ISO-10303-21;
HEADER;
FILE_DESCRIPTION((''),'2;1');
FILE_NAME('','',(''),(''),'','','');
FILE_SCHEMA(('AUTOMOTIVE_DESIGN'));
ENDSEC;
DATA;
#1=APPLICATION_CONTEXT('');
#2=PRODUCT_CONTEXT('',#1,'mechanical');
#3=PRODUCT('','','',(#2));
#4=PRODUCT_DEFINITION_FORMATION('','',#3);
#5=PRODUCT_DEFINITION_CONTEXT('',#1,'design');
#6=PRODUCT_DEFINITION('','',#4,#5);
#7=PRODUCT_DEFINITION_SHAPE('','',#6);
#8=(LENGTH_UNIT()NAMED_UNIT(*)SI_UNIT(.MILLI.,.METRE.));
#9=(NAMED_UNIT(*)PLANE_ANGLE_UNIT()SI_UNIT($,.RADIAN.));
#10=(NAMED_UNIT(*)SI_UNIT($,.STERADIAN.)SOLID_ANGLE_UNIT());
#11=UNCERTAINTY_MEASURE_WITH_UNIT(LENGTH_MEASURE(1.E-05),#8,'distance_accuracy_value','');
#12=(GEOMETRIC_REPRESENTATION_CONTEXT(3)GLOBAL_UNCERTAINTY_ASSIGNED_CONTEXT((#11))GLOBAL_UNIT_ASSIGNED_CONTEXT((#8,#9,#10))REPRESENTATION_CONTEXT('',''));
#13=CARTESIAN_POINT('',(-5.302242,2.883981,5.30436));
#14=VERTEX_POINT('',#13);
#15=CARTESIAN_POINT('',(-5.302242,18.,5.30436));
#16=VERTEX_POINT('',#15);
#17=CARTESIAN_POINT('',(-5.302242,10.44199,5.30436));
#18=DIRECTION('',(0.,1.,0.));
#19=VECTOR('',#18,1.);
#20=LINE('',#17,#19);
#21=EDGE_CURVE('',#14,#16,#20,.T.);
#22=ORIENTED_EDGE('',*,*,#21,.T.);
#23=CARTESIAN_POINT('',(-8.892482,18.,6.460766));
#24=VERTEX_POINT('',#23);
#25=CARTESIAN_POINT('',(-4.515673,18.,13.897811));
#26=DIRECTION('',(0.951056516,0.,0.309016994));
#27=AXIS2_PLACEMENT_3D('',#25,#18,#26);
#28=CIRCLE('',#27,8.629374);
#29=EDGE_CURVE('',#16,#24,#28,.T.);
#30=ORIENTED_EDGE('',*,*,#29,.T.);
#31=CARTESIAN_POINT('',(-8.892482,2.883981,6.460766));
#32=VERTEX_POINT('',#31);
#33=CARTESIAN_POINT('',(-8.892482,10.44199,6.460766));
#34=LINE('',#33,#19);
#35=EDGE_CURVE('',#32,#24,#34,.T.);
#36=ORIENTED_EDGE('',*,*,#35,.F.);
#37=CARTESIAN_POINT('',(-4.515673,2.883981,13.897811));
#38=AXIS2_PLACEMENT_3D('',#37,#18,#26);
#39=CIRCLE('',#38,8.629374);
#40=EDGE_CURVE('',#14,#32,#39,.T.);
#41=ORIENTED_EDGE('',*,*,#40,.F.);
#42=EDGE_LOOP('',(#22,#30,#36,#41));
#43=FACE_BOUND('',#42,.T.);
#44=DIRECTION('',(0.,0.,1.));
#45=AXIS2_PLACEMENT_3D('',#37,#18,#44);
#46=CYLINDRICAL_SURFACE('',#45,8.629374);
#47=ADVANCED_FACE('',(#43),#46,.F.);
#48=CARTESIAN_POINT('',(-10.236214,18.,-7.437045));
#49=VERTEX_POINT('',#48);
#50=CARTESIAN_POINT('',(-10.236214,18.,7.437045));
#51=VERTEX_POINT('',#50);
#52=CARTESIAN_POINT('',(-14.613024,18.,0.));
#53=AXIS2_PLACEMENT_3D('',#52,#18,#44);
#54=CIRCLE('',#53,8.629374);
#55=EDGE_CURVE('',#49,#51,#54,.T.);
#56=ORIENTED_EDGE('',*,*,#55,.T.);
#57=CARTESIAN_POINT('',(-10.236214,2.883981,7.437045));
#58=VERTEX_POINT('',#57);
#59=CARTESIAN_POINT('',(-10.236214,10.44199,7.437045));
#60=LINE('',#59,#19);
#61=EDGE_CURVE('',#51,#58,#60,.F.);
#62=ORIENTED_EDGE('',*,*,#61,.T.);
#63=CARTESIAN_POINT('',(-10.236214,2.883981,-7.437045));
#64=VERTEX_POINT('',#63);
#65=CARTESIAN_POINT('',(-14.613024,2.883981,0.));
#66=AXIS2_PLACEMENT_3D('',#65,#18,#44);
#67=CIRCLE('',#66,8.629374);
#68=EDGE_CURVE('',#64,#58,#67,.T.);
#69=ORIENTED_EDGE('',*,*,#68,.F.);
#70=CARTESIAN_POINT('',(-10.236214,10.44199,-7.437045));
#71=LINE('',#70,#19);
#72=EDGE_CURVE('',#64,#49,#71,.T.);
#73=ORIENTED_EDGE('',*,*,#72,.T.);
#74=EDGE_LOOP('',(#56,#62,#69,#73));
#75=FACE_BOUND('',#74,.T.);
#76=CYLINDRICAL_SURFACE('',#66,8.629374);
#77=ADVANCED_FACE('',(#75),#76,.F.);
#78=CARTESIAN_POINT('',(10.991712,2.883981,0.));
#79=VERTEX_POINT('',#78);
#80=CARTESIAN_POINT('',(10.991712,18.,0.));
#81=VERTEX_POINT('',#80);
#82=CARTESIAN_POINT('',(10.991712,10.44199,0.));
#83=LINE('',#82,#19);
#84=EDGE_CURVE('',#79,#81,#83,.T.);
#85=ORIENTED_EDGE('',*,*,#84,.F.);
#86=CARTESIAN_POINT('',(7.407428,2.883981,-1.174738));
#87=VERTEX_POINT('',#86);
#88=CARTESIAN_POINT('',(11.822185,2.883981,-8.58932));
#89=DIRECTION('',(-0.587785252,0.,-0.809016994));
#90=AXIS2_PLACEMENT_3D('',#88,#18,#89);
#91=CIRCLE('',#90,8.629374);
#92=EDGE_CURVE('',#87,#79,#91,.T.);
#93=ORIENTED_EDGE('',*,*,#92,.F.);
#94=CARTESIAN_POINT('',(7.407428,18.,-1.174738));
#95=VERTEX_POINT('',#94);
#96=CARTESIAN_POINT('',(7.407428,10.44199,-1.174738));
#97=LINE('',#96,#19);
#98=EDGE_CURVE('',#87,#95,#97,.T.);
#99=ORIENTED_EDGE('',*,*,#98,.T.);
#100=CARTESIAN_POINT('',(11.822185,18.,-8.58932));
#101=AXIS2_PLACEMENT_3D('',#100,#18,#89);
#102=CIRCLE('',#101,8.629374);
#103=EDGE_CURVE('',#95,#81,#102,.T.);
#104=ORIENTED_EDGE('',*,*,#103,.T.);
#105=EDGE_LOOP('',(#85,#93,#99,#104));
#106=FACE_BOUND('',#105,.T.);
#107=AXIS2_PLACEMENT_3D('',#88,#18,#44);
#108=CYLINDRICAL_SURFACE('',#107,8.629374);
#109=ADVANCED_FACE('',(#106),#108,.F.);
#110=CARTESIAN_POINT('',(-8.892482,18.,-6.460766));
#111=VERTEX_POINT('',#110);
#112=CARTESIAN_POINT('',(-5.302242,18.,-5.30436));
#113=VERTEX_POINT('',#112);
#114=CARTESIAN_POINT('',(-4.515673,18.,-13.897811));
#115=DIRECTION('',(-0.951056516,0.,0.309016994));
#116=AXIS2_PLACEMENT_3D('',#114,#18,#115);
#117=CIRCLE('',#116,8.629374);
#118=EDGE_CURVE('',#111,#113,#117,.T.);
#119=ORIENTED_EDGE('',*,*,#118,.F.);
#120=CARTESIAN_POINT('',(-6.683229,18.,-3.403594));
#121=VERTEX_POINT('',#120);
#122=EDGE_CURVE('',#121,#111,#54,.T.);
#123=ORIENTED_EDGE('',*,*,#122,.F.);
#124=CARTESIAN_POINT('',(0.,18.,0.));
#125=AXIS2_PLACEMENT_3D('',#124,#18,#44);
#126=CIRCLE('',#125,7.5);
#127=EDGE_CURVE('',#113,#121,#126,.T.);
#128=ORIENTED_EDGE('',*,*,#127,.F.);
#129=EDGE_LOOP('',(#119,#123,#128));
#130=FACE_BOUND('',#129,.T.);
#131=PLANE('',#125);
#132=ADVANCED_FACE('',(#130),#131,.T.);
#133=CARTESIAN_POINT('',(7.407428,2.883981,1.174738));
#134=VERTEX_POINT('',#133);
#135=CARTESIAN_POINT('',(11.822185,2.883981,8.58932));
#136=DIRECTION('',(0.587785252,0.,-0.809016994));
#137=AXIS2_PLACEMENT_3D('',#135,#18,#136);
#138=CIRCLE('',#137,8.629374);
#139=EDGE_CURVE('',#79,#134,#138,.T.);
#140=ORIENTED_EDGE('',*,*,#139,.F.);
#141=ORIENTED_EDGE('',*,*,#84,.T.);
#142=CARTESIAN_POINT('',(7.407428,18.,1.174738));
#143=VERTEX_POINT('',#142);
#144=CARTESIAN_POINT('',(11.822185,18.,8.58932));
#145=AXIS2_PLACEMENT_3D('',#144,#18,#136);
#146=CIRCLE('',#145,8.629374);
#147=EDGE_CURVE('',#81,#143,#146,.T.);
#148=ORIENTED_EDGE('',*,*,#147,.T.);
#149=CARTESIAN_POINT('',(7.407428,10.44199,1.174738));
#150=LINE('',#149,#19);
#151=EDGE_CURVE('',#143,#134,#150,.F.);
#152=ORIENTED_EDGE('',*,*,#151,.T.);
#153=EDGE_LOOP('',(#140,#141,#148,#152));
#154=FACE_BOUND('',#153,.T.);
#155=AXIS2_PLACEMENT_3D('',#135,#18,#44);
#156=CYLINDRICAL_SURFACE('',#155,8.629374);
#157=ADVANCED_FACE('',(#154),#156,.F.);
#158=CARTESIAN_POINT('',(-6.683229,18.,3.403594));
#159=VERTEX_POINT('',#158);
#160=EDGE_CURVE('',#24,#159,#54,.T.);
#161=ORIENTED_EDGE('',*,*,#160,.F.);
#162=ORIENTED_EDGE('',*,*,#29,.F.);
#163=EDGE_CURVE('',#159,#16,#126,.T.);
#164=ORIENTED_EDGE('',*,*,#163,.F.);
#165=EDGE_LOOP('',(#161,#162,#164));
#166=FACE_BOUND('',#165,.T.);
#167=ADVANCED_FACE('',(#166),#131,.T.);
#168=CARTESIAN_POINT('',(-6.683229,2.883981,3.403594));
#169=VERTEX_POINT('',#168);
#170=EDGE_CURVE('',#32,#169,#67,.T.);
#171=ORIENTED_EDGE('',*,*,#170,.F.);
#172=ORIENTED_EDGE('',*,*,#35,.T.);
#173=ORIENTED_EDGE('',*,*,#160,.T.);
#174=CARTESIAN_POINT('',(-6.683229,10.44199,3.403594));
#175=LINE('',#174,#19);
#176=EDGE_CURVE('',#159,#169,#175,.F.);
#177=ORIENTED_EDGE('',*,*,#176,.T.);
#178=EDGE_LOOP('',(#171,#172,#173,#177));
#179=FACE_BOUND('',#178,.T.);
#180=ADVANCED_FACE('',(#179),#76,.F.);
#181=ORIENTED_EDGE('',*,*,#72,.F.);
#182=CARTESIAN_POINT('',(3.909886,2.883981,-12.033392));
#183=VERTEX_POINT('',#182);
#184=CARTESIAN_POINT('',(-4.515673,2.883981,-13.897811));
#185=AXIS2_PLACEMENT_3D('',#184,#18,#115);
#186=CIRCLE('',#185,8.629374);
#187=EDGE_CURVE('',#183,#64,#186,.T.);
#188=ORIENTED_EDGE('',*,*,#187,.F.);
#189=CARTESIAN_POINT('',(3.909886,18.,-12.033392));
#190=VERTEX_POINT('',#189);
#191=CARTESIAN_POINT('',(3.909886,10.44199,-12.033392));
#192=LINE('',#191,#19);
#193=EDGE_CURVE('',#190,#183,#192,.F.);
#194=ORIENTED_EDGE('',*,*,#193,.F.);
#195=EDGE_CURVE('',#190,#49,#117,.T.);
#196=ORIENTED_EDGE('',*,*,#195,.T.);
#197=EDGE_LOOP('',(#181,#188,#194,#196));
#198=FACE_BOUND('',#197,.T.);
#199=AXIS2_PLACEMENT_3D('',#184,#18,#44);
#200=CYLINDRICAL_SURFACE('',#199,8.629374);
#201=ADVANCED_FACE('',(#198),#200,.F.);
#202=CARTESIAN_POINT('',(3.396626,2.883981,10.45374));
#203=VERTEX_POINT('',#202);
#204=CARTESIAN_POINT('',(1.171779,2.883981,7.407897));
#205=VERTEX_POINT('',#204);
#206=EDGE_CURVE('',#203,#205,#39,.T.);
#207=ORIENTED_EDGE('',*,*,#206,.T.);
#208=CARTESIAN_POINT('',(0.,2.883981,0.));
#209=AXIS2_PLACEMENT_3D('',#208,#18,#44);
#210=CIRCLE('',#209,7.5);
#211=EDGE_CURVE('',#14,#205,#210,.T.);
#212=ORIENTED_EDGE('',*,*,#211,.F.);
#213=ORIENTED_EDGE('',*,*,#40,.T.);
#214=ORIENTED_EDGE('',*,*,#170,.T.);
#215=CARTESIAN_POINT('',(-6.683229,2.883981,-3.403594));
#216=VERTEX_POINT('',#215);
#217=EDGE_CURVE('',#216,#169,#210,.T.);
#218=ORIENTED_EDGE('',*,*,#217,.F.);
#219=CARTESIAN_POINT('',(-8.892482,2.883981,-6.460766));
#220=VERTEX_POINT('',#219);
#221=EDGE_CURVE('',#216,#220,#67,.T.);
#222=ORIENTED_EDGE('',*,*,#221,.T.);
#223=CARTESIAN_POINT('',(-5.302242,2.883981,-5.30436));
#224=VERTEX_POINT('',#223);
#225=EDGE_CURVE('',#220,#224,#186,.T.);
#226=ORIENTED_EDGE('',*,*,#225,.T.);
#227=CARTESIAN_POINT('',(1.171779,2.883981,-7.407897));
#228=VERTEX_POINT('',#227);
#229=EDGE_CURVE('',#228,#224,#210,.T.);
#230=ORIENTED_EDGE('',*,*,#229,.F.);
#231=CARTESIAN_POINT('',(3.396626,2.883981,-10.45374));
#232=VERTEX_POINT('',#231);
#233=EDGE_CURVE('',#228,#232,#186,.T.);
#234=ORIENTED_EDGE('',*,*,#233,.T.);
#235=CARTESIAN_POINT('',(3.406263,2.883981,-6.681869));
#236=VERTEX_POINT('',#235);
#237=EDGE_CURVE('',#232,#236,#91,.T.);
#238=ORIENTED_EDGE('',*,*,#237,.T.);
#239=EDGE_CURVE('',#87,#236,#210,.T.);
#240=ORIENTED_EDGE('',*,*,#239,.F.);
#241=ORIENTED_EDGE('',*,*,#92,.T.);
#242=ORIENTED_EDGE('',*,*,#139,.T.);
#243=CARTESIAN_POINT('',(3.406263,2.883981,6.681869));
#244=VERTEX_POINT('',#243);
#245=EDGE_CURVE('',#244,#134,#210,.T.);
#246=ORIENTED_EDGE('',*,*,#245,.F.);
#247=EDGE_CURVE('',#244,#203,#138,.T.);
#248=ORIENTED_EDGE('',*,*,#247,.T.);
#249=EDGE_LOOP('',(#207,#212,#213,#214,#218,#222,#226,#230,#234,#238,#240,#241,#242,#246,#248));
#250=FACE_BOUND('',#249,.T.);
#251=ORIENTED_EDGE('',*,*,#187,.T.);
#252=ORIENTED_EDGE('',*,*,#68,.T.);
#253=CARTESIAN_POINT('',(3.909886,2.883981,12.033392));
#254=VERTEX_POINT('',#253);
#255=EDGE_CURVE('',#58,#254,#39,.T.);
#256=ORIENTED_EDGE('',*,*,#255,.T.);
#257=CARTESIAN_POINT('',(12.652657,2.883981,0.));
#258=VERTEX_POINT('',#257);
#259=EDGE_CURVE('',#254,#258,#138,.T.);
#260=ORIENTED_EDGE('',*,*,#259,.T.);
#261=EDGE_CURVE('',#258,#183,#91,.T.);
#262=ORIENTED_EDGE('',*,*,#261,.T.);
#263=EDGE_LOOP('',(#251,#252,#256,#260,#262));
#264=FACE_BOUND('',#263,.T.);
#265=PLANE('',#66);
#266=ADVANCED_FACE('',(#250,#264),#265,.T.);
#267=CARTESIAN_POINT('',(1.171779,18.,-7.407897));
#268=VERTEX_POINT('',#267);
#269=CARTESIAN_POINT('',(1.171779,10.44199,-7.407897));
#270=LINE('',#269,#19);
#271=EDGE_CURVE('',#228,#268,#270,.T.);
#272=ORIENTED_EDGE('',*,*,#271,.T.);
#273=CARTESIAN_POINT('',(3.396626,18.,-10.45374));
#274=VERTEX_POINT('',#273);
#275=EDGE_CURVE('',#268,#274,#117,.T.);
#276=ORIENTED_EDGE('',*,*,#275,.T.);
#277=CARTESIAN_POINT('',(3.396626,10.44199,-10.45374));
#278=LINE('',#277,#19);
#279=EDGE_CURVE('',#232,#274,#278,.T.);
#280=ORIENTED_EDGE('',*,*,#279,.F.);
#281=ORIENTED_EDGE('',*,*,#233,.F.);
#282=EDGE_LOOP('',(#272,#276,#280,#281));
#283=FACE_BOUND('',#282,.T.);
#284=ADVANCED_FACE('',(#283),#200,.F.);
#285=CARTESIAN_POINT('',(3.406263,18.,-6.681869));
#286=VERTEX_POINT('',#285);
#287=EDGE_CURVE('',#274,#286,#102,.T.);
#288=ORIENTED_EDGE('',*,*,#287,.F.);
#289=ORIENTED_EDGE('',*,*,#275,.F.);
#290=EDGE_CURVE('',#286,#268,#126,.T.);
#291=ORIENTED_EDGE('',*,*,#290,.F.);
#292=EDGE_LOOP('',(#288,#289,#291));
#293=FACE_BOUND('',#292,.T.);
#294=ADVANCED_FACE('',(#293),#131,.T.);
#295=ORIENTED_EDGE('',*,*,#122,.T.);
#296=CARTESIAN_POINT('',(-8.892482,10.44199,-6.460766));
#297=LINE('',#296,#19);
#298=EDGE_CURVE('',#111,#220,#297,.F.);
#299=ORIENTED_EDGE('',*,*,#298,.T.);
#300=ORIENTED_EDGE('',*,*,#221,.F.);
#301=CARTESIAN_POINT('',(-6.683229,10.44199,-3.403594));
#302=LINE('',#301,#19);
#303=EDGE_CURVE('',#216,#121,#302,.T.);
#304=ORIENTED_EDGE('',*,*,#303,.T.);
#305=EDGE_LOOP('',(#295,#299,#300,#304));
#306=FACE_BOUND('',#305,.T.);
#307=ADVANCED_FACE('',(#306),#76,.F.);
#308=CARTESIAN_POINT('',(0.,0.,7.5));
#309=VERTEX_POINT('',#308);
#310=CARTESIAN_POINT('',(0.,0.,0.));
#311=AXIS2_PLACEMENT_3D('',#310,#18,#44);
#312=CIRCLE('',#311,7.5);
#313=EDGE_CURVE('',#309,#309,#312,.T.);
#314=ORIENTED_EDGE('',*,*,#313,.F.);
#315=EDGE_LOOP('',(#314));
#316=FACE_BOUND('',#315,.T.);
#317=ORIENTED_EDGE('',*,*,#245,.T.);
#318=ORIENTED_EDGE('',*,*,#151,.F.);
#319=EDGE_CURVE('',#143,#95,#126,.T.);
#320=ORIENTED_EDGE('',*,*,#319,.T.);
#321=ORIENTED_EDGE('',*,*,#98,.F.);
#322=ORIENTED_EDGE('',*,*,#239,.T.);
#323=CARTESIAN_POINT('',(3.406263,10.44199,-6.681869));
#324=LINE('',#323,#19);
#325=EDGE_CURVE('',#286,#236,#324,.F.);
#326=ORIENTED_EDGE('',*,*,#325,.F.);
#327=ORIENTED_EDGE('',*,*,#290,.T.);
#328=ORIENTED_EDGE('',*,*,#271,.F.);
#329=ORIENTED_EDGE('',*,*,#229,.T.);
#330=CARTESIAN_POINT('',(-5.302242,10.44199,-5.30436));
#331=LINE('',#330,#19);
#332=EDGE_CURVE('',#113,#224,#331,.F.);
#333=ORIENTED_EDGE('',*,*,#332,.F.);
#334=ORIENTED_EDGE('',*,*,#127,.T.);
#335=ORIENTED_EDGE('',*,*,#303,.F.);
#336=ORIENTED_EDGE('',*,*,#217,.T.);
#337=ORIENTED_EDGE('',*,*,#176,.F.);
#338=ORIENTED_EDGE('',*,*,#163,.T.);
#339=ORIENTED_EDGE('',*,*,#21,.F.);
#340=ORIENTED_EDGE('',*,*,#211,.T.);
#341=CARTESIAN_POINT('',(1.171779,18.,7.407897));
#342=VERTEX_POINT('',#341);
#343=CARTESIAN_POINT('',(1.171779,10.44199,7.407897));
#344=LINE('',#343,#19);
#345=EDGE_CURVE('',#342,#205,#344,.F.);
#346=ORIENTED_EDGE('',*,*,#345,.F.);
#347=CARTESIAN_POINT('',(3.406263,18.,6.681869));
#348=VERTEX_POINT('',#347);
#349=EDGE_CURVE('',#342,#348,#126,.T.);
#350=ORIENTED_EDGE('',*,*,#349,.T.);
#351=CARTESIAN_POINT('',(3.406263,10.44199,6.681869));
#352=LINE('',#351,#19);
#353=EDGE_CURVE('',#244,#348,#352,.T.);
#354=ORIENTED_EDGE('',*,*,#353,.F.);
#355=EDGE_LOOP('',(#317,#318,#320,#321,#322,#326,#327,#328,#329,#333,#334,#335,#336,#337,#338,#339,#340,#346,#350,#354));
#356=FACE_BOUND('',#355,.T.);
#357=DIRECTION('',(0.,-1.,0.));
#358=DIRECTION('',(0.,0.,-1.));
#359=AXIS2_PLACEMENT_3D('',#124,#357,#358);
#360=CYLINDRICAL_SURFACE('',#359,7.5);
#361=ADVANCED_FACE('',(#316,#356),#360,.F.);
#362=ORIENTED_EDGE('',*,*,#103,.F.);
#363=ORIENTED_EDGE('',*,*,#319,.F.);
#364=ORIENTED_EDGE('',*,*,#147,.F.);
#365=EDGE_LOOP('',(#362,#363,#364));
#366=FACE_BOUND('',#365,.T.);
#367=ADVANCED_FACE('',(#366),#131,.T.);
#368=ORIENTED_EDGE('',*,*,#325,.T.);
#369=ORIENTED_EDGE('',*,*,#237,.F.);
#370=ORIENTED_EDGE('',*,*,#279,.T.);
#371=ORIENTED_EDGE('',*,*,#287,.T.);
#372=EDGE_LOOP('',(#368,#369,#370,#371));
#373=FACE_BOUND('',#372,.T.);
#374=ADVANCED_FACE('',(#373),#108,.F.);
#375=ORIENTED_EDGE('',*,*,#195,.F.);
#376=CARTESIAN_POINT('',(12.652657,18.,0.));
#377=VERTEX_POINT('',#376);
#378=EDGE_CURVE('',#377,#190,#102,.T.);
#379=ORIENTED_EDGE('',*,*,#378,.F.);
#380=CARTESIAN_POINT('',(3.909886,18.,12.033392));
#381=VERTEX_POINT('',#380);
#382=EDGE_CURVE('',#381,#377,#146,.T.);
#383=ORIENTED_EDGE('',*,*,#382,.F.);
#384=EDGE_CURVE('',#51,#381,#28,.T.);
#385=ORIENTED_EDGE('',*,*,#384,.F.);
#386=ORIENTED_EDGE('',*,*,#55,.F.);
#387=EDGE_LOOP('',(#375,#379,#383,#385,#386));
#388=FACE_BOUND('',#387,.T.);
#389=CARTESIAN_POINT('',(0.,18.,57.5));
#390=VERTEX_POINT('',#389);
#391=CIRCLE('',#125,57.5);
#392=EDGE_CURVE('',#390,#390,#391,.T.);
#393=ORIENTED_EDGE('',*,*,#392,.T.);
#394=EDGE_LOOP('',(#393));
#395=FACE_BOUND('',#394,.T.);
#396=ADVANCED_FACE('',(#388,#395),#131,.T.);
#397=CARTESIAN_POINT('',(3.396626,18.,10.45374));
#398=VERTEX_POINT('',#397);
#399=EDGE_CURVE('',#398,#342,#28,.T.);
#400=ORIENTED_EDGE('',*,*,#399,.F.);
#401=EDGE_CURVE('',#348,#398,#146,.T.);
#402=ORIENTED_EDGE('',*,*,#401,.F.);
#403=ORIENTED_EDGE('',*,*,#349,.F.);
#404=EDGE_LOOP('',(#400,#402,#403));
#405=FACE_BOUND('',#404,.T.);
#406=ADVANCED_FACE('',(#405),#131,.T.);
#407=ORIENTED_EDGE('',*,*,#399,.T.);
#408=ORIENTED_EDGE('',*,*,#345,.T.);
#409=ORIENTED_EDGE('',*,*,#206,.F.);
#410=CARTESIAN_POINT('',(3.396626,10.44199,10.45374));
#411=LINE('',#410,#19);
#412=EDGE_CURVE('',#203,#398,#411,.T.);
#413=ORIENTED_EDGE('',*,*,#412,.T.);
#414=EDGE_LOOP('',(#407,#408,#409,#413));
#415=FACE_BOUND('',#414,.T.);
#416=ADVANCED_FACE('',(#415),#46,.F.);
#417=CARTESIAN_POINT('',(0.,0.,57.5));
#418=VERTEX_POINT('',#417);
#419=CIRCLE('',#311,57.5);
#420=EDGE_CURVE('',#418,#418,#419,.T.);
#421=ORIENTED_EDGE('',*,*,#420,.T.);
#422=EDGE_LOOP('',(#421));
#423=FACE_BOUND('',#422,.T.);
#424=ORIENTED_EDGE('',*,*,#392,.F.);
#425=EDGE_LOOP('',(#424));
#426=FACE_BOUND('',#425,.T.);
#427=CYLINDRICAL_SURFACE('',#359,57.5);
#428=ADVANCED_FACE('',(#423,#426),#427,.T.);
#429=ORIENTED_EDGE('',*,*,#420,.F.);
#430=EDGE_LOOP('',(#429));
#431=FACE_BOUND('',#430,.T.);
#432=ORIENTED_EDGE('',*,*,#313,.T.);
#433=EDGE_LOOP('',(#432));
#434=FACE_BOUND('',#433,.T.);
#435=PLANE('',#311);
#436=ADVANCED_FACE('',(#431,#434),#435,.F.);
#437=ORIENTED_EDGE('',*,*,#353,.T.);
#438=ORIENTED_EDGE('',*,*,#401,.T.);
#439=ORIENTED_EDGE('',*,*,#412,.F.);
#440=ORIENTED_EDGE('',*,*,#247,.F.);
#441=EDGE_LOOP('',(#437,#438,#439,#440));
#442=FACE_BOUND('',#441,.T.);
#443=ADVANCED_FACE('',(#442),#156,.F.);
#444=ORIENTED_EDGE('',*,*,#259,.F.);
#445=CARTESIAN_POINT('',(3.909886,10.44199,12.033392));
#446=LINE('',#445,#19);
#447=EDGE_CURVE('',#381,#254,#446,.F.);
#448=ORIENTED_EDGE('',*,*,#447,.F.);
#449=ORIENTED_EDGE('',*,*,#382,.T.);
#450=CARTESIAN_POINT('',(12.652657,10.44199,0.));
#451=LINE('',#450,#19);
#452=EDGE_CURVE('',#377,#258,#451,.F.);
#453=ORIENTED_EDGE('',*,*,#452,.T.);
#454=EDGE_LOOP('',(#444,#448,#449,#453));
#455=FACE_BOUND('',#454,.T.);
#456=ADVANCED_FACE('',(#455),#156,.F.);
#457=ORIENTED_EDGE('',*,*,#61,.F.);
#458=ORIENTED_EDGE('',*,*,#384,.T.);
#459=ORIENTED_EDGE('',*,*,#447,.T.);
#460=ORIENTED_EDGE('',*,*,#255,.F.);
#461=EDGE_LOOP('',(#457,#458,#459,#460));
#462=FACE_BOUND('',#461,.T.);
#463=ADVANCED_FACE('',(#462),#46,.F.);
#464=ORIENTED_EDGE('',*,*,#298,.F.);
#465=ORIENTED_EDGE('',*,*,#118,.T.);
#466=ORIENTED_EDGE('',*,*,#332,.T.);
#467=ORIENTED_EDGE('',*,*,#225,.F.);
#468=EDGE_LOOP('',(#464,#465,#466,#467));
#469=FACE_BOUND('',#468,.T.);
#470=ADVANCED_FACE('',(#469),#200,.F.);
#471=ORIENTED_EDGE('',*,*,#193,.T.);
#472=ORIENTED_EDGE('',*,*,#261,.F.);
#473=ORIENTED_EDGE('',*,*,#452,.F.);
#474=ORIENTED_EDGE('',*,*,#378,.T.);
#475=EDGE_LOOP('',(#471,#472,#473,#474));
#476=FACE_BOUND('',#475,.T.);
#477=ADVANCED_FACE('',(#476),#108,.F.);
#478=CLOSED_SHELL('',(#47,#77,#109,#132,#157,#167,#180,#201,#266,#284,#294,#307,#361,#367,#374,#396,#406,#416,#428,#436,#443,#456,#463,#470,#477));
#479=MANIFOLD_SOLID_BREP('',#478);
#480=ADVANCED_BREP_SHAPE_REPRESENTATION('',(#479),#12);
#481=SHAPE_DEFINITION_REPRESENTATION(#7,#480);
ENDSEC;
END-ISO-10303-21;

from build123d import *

# Parameters (mm, degrees)
SKETCH1_R           = 57.5
BOSS_EXTRUDE1_DEPTH = 18
SKETCH2_R           = 7.5
CUT_EXTRUDE1_DEPTH  = 84.285653026
SKETCH3_R           = 8.629374231
CUT_EXTRUDE2_DEPTH  = 15.116019146
CIRPATTERN1_COUNT   = 5


with BuildPart() as part:
    # Sketch1 → Boss-Extrude1 (new body)
    with BuildSketch(Plane(origin=(0, 0, 0), x_dir=(1, 0, 0), z_dir=(0, 1, 0))):
        Circle(SKETCH1_R)
    extrude(amount=BOSS_EXTRUDE1_DEPTH)

    # Sketch2 → Cut-Extrude1 (cut, through all)
    with BuildSketch(Plane(origin=(0, 0, 0), x_dir=(1, 0, 0), z_dir=(0, 1, 0))):
        Circle(SKETCH2_R)
    extrude(amount=CUT_EXTRUDE1_DEPTH, mode=Mode.SUBTRACT)

    # Sketch3 → Cut-Extrude2 (cut)
    with BuildSketch(Plane(origin=(0, 18, 0), x_dir=(1, 0, 0), z_dir=(0, 1, 0))):
        with Locations((-14.613023748, 0)):
            Circle(SKETCH3_R)
    cut_extrude2 = extrude(amount=-CUT_EXTRUDE2_DEPTH, mode=Mode.SUBTRACT)

    # CirPattern1: Cut-Extrude2 ×5 about axis
    cirpattern1_axis = Axis((0, 0, 0), (0, 1, 0))
    for i in range(1, CIRPATTERN1_COUNT):
        add(cut_extrude2.rotate(cirpattern1_axis, i * 360 / CIRPATTERN1_COUNT), mode=Mode.SUBTRACT)


solid = part.part
